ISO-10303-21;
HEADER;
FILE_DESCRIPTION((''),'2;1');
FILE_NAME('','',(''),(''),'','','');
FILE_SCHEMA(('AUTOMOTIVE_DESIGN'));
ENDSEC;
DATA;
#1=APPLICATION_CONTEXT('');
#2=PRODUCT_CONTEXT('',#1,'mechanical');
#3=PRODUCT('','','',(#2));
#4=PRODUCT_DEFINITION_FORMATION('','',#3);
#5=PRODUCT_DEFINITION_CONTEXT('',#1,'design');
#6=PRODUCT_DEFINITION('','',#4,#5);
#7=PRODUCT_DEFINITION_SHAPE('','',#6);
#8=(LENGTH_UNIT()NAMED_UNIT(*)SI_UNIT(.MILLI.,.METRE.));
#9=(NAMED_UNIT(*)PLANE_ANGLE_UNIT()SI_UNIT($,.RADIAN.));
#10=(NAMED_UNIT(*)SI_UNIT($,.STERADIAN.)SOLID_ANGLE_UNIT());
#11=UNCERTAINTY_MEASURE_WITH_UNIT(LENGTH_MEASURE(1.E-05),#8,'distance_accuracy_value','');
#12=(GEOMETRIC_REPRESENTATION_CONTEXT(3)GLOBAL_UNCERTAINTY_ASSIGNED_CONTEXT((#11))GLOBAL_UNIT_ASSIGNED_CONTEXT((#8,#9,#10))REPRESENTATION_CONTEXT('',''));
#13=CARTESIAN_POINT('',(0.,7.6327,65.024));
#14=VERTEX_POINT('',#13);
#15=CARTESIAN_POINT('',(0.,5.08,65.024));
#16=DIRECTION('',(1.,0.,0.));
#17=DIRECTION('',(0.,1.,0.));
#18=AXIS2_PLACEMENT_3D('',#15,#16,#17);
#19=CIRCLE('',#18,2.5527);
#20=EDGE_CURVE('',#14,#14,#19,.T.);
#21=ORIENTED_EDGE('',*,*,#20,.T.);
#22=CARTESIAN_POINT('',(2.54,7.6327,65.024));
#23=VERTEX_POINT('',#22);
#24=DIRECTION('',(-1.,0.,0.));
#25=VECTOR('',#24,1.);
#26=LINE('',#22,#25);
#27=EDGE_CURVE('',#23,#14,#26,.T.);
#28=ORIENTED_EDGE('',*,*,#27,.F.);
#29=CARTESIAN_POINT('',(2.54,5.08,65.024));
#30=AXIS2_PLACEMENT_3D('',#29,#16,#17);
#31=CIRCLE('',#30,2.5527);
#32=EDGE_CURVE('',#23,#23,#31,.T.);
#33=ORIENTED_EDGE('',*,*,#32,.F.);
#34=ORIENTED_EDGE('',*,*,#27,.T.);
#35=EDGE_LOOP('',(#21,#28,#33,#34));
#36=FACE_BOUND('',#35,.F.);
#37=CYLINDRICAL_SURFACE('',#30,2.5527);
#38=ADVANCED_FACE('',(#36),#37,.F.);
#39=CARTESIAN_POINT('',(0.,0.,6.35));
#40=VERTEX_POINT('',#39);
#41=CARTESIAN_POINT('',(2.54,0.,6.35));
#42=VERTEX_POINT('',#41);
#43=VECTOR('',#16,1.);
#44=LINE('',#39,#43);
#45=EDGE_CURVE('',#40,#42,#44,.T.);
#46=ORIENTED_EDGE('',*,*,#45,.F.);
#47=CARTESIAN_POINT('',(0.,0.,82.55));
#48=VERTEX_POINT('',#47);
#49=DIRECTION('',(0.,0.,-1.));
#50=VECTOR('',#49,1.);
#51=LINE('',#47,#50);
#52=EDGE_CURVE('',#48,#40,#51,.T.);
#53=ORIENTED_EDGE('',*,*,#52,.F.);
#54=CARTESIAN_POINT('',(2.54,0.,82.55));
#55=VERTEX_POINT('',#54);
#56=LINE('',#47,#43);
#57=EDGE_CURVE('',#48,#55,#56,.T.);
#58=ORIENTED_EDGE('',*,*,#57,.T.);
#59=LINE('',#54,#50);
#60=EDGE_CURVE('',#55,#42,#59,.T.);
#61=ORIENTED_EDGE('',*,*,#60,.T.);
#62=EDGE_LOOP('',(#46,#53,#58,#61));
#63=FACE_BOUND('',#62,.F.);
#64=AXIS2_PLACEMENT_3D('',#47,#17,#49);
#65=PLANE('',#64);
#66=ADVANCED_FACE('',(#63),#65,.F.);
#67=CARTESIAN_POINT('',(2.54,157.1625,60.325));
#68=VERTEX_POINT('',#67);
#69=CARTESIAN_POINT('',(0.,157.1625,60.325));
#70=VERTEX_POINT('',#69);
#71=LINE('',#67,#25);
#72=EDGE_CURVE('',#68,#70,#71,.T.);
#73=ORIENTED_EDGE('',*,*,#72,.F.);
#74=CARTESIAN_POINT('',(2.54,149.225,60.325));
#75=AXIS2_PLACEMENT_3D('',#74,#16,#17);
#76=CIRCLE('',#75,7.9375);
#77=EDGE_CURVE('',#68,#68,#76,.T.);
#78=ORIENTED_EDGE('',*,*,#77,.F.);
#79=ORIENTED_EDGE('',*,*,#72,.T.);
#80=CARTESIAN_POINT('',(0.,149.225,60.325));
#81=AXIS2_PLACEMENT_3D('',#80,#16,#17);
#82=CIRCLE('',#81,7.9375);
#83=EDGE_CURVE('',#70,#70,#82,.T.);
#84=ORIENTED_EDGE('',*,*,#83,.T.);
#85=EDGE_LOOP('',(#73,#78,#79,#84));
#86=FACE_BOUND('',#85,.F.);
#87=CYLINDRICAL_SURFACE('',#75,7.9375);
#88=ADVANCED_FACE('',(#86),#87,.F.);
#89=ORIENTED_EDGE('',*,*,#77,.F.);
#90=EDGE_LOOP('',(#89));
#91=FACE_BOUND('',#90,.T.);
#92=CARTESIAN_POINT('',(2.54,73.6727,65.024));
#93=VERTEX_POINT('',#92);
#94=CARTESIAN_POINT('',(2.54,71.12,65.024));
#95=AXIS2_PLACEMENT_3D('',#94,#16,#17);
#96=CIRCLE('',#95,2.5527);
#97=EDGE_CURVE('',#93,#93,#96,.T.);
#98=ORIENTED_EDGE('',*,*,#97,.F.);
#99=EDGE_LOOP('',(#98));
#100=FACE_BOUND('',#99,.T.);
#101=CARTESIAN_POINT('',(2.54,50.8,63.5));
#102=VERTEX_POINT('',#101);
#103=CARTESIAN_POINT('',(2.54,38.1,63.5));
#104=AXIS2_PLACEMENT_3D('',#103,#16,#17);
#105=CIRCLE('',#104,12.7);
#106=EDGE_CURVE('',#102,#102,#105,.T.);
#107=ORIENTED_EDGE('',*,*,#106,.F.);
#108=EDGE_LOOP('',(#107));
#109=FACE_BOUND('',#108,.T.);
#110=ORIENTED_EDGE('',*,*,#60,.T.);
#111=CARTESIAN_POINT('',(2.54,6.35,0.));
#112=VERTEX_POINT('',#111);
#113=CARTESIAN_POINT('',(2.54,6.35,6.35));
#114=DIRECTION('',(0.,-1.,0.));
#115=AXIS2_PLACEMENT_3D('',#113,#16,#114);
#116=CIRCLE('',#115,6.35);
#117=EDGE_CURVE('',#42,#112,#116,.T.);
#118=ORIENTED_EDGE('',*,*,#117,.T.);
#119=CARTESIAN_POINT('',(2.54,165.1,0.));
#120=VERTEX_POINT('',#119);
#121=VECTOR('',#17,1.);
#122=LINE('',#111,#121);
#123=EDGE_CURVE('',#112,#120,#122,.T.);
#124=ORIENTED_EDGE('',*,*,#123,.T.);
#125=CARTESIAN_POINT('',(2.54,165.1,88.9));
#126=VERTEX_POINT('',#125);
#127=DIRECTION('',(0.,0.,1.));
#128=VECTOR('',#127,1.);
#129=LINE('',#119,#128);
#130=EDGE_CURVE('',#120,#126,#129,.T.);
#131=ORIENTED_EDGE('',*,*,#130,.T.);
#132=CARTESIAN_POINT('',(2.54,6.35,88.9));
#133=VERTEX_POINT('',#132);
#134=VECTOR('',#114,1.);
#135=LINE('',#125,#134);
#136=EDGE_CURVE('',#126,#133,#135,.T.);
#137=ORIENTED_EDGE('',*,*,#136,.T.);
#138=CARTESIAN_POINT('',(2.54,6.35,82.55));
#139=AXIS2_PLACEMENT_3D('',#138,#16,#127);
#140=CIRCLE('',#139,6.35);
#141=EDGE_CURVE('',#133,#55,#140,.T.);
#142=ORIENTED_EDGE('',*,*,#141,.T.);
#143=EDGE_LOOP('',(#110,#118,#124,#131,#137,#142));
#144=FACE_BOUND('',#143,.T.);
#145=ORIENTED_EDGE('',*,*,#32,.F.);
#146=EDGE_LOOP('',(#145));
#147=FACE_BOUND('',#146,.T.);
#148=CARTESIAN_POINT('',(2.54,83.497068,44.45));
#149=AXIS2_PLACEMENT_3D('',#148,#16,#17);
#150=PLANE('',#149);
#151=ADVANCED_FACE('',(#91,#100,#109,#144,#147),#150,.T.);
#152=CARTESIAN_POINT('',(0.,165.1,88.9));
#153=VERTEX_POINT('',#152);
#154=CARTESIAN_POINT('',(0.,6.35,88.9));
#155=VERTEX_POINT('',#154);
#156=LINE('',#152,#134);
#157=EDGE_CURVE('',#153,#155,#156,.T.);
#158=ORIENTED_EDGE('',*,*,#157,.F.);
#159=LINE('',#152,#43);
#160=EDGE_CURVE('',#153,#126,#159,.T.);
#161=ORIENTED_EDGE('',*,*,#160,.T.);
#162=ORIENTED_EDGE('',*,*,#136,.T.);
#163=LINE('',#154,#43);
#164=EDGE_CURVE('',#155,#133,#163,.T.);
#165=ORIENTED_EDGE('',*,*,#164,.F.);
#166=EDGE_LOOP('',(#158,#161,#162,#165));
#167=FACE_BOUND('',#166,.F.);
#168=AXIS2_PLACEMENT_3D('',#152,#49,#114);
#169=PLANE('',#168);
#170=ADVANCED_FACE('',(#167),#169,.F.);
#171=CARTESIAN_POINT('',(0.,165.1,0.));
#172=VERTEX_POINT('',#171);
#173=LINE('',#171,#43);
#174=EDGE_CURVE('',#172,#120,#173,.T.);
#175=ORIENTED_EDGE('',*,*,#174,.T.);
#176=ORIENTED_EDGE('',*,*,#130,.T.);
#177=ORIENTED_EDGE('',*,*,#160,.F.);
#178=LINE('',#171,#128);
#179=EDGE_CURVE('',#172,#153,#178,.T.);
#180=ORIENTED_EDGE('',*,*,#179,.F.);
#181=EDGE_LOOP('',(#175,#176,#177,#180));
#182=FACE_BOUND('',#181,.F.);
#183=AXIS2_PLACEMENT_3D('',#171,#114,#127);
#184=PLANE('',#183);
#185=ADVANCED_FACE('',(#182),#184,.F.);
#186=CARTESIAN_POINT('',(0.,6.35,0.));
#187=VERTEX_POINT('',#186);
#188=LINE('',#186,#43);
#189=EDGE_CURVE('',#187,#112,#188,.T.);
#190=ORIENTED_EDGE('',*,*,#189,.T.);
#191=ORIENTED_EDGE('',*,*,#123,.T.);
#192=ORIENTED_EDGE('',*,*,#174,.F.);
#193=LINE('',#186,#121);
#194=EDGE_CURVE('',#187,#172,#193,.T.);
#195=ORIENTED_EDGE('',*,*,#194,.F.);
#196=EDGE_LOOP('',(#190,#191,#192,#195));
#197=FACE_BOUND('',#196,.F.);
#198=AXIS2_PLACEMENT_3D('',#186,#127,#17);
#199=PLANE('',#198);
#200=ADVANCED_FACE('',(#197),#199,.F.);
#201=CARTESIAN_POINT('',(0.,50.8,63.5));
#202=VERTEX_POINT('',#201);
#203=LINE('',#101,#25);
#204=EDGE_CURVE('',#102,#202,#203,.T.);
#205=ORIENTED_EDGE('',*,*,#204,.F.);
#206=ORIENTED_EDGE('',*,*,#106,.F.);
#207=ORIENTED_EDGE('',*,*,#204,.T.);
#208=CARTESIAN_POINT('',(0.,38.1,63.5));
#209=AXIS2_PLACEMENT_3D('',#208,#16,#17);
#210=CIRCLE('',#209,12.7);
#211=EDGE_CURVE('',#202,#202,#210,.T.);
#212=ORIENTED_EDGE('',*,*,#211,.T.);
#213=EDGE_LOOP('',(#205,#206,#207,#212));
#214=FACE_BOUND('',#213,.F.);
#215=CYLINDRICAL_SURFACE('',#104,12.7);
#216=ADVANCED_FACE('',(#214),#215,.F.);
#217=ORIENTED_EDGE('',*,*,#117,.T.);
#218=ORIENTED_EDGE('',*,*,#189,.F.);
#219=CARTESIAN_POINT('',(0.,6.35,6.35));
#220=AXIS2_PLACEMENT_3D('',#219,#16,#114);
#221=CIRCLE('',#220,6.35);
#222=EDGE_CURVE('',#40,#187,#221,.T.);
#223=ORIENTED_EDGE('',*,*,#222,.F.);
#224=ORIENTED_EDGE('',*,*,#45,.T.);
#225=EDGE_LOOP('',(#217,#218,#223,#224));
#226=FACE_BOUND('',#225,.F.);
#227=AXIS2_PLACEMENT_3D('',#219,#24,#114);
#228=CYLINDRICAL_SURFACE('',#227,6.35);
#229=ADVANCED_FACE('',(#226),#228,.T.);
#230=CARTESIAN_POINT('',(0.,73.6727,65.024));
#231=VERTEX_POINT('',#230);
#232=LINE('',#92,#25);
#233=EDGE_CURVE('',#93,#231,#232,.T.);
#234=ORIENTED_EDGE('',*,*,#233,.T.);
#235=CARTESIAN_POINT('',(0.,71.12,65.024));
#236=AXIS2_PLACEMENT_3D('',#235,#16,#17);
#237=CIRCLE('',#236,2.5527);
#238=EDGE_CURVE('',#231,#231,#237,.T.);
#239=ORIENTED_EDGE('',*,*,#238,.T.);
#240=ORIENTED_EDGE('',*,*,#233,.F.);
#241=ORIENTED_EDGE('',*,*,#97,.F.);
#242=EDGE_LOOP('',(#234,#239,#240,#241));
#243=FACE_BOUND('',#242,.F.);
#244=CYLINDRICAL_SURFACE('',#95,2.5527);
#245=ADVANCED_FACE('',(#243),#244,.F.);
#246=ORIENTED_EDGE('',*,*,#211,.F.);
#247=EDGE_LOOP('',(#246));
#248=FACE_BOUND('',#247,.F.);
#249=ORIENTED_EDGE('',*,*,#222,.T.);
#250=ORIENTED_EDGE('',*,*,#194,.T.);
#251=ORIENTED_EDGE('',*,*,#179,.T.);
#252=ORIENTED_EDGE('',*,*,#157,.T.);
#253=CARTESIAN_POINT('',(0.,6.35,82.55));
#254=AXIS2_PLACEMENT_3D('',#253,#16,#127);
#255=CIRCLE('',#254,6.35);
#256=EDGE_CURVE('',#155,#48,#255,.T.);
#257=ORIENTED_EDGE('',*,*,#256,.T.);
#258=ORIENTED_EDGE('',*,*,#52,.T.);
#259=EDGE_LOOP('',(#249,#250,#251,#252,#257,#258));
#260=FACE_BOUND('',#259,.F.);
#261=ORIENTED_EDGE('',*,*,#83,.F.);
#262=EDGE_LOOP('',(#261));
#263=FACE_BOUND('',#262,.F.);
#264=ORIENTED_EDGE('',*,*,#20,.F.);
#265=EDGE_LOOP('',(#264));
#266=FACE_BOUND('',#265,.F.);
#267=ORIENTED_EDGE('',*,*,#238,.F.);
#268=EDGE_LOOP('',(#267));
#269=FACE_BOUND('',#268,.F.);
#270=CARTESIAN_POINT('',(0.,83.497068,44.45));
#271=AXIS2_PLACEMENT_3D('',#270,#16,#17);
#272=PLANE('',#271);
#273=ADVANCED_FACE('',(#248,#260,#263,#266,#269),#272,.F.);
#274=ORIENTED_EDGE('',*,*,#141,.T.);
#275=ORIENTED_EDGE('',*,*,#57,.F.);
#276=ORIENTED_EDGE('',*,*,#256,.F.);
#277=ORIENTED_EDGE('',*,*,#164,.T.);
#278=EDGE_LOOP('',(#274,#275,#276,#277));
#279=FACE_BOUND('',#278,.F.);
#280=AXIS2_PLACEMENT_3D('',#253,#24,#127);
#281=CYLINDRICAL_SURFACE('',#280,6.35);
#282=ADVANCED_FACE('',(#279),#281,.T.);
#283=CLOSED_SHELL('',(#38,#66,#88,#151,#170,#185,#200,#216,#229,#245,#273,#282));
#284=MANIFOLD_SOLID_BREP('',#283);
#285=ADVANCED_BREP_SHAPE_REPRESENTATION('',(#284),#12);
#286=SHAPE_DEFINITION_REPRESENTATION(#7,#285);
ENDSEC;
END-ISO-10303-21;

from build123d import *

# Parameters (mm, degrees)
F1_DEPTH = 2.54
F2_R     = 12.7
F3_DEPTH = 2.541
F2_R_2   = 7.9375
F4_DEPTH = 25.4
F5_R     = 2.5527
F6_DEPTH = 25.4


# Not quite as in the source:
# - a feature names something its author has since deleted; it is built from what else it names


with BuildPart() as f1:
    # F0 (on Right) → F1 (new body)
    with BuildSketch(Plane.YZ):
        with BuildLine():
            ThreePointArc((0, 6.35), (1.8598719395, 1.8598719395), (6.35, 0))
            Line((6.35, 0), (165.1, 0))
            Line((165.1, 0), (165.1, 88.9))
            Line((165.1, 88.9), (6.35, 88.9))
            ThreePointArc((6.35, 88.9), (1.8598719395, 87.0401280605), (0, 82.55))
            Line((0, 82.55), (0, 6.35))
        make_face()
    extrude(amount=F1_DEPTH)

    # F2 (on face) → F3 (cut, through all)
    with BuildSketch(Plane.YZ.offset(2.54)):
        with Locations((38.1, 63.5)):
            Circle(F2_R)
    extrude(amount=-F3_DEPTH, mode=Mode.SUBTRACT)

    # F2 (on face) → F4 (cut)
    with BuildSketch(Plane.YZ.offset(2.54)):
        with Locations((38.1, 63.5)):
            Circle(F2_R)
        with Locations((149.225, 60.325)):
            Circle(F2_R_2)
    extrude(amount=-F4_DEPTH, mode=Mode.SUBTRACT)

    # F5 (on face) → F6 (cut)
    with BuildSketch(Plane.YZ.offset(2.54)):
        with Locations((5.08, 65.024)):
            Circle(F5_R)
        with Locations((71.12, 65.024)):
            Circle(F5_R)
    extrude(amount=-F6_DEPTH, mode=Mode.SUBTRACT)


solid = f1.part
